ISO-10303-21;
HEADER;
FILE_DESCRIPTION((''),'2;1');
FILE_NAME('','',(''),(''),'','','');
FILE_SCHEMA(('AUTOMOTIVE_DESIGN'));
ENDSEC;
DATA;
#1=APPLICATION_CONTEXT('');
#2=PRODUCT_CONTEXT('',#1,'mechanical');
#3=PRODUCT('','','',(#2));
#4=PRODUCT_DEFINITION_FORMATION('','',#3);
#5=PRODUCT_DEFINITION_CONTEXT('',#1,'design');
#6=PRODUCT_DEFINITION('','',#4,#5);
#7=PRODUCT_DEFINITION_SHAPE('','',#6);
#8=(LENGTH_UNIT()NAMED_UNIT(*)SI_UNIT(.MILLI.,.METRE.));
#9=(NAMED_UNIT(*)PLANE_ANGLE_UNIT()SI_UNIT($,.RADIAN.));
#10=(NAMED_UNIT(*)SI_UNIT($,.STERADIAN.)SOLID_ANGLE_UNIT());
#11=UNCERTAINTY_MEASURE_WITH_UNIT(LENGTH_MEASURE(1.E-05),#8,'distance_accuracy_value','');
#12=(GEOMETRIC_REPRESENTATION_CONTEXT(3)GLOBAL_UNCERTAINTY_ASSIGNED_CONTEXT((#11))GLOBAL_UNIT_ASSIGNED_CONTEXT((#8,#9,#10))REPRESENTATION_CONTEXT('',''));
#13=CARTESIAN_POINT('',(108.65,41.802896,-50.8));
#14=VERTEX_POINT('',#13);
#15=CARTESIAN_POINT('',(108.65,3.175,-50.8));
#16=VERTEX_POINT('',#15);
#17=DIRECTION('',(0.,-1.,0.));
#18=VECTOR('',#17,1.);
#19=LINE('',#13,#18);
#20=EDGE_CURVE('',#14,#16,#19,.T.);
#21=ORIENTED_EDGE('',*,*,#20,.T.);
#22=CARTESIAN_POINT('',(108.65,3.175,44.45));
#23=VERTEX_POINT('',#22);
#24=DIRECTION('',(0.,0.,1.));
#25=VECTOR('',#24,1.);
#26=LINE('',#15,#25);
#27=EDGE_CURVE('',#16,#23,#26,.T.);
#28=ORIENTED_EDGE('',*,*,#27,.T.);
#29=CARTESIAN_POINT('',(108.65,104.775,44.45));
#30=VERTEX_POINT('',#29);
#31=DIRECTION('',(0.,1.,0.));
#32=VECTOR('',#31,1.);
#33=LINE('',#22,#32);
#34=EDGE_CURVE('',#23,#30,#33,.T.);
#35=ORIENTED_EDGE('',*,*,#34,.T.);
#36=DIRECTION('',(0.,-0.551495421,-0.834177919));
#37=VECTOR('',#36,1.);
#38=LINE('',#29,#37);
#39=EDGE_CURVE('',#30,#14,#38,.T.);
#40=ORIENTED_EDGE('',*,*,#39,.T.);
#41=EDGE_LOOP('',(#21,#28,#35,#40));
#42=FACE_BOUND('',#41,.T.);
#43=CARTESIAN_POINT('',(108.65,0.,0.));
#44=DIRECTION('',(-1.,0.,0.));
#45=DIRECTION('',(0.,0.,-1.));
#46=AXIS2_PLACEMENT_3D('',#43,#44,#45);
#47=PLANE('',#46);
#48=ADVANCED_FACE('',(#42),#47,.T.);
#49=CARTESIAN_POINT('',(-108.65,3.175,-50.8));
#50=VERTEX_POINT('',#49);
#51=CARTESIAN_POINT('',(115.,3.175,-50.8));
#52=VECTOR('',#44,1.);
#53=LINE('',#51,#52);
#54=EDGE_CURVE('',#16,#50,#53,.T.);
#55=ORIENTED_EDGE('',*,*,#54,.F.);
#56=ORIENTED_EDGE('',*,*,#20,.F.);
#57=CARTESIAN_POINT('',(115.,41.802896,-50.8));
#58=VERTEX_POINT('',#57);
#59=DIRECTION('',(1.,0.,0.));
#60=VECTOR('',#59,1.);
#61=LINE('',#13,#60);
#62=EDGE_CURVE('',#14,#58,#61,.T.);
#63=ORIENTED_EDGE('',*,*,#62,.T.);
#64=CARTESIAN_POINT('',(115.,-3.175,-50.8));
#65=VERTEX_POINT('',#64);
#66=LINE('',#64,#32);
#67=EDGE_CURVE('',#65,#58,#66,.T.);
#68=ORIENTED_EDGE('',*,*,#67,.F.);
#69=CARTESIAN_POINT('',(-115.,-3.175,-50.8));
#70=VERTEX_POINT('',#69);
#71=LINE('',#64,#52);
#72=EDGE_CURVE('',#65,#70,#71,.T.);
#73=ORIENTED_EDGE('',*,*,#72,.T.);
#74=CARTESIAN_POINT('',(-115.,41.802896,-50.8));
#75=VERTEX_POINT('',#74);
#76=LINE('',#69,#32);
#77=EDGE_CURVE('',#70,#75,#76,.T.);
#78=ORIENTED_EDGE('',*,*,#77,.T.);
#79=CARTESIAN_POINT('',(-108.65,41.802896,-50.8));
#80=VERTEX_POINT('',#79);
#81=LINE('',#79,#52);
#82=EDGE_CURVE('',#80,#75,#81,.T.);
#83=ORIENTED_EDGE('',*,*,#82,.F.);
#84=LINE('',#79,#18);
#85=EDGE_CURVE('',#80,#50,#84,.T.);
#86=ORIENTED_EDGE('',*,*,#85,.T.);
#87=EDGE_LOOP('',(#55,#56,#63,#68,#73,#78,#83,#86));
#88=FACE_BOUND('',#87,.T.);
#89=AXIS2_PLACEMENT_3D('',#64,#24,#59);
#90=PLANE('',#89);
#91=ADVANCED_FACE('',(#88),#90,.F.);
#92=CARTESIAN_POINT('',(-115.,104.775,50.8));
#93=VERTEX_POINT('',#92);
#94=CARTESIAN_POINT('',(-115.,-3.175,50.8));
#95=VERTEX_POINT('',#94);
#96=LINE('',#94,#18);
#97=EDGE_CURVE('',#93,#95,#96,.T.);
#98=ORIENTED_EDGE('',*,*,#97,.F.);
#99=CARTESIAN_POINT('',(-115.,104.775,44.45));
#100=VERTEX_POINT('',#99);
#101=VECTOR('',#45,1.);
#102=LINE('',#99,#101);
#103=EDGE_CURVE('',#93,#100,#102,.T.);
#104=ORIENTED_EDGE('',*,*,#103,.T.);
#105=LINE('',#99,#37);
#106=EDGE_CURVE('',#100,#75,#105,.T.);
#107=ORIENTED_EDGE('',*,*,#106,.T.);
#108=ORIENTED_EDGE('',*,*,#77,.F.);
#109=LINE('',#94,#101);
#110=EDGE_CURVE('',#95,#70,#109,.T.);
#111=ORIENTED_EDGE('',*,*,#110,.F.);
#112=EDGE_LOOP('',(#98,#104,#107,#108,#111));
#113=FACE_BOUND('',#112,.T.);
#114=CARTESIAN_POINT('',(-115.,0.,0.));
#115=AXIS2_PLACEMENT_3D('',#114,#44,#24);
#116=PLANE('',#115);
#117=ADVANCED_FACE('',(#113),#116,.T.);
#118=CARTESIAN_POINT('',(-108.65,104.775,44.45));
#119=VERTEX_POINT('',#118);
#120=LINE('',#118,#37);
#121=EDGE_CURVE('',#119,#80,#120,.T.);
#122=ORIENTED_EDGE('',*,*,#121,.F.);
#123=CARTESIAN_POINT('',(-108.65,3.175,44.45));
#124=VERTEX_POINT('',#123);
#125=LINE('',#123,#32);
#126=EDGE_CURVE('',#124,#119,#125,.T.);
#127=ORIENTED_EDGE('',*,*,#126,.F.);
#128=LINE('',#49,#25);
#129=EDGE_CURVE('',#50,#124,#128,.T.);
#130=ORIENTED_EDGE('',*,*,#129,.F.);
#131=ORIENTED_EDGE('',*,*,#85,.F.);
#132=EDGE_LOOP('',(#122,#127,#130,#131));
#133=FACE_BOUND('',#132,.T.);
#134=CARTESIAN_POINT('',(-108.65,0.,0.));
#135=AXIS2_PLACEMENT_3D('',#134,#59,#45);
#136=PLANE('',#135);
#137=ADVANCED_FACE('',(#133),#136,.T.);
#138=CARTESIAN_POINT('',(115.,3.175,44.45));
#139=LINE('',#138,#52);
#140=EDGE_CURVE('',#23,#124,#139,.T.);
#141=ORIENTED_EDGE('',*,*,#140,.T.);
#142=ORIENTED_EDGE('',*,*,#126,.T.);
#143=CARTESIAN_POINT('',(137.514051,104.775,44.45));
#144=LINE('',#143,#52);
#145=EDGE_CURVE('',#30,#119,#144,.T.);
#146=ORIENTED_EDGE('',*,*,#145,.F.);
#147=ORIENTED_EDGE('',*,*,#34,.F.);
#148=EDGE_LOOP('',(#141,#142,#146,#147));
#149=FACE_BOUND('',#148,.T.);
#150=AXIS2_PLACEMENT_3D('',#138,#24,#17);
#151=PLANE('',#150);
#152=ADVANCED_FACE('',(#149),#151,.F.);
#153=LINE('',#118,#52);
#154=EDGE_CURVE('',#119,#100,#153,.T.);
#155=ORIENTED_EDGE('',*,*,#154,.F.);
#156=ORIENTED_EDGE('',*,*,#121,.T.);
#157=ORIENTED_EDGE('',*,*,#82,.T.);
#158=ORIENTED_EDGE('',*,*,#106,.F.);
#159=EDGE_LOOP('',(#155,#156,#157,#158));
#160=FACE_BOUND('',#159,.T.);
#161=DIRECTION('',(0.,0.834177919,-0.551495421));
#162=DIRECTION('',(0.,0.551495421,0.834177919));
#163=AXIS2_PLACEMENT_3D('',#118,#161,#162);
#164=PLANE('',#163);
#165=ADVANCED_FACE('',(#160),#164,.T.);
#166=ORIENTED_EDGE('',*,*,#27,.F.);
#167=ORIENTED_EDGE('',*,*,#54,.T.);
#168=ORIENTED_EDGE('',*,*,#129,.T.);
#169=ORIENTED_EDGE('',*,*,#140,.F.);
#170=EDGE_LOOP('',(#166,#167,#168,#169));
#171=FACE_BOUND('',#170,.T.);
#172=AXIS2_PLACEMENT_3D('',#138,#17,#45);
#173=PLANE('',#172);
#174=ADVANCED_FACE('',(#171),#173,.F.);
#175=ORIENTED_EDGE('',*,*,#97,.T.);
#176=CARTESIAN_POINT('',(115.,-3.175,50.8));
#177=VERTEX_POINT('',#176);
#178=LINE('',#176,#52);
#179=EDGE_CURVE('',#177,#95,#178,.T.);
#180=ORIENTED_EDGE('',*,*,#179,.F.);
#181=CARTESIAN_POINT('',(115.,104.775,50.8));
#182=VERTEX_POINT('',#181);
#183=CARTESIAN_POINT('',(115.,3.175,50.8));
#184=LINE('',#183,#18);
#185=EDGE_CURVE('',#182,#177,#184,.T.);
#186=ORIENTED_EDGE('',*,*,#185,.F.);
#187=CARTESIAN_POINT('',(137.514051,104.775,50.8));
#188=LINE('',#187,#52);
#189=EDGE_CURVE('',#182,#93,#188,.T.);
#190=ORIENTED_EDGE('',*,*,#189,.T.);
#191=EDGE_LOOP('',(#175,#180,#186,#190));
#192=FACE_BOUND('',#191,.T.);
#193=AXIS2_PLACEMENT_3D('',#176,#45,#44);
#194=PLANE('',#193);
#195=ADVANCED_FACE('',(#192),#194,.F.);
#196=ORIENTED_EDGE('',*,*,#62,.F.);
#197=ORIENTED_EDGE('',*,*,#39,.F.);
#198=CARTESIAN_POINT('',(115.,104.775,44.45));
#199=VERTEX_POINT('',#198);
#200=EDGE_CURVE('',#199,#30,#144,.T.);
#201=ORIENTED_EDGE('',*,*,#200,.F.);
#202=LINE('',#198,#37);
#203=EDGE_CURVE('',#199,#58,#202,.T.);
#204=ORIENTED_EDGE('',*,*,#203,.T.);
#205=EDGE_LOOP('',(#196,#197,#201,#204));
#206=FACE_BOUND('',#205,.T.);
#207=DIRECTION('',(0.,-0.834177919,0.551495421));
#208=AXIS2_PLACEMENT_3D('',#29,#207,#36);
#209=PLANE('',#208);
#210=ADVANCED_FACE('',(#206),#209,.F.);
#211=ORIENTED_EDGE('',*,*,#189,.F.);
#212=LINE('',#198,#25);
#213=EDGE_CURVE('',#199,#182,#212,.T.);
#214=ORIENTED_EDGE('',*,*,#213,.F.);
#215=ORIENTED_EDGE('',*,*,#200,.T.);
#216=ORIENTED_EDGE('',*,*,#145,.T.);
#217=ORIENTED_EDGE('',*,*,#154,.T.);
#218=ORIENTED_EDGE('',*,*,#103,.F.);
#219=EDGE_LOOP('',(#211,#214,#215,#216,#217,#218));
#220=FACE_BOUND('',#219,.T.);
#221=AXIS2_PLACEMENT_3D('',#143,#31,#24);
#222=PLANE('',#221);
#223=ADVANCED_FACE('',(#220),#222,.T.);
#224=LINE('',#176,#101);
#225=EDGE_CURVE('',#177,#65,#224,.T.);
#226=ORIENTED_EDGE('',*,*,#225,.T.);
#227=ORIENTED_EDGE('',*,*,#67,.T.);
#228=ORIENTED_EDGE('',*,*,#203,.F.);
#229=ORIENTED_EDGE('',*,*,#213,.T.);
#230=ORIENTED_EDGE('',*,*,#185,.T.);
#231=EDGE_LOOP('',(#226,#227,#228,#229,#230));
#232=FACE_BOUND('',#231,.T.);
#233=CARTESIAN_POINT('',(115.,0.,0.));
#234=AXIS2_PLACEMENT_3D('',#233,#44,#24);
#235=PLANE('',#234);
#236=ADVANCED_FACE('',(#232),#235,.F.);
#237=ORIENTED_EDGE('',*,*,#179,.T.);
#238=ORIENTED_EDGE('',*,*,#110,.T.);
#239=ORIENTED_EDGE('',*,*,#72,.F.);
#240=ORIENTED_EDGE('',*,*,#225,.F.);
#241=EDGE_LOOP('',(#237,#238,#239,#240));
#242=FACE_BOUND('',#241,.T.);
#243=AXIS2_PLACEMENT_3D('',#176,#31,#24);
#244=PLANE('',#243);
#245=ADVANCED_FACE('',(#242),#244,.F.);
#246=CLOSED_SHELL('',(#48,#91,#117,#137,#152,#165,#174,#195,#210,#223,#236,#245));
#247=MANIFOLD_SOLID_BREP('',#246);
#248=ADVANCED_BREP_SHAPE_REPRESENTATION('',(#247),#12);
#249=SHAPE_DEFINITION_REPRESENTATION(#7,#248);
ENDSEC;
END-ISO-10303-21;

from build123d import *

# Parameters (mm, degrees)
BOSS_EXTRUDE1_DEPTH     = 115
SKETCH2_R               = 2.5
CUT_EXTRUDE1_DEPTH      = 171.92584101
CUT_EXTRUDE2_DEPTH      = 150.015569656
CUT_EXTRUDE2_DEPTH_BACK = 150.015569656
SKETCH4_R               = 3.3
SPLIT1_SURFACE_1_BACK   = 266.855
SPLIT1_SURFACE_1_DEPTH  = 533.71
SPLIT1_SURFACE_2_BACK   = 266.855
SPLIT1_SURFACE_2_DEPTH  = 533.71
SKETCH6_W               = 6.35
SKETCH6_H               = 21.6
BOSS_EXTRUDE2_DEPTH     = 230
DELETEFACE1_START       = -3.175
DELETEFACE1_OUTLINE_R   = 3.3
DELETEFACE1_DEPTH       = 6.35
DELETEFACE1_START_2     = 44.45
DELETEFACE1_2_OUTLINE_R = 2.5
DELETEFACE1_2_DEPTH     = 6.35
BOSS_EXTRUDE3_DEPTH     = 6.35


# Read off the part's stored shape, not the designer's step: DeleteFace1
with BuildPart() as part:
    # Sketch1 → Boss-Extrude1 (new, symmetric)
    with BuildSketch(Plane(origin=(0, 0, 0), x_dir=(0, 0, -1), z_dir=(1, 0, 0))):
        Polygon((-50.8, -3.175), (50.8, -3.175), (50.8, 3.175), (-44.45, 3.175), (-44.45, 83.175), (-50.8, 83.175), (-50.8, 3.175), align=None)
    extrude(amount=BOSS_EXTRUDE1_DEPTH, both=True)

    # Sketch2 → Cut-Extrude1 (cut, through all)
    with BuildSketch(Plane(origin=(0, 0, 44.45), x_dir=(-1, 0, 0), z_dir=(0, 0, -1))):
        with Locations(Location((-32.5, 73.491666667, 0), (0, 0, 90))):
            Circle(SKETCH2_R)
        with Locations(Location((-32.5, 11.825, 0), (0, 0, 90))):
            Circle(SKETCH2_R)
        with Locations(Location((32.5, 11.825, 0), (0, 0, 90))):
            Circle(SKETCH2_R)
        with Locations(Location((32.5, 73.491666667, 0), (0, 0, 90))):
            Circle(SKETCH2_R)
        with Locations(Location((-102.75, 73.491666667, 0), (0, 0, 90))):
            Circle(SKETCH2_R)
        with Locations(Location((-102.75, 11.825, 0), (0, 0, 90))):
            Circle(SKETCH2_R)
        with Locations(Location((102.75, 73.491666667, 0), (0, 0, 90))):
            Circle(SKETCH2_R)
        with Locations(Location((102.75, 11.825, 0), (0, 0, 90))):
            Circle(SKETCH2_R)
    extrude(amount=-CUT_EXTRUDE1_DEPTH, mode=Mode.SUBTRACT)

    # Sketch4 → Cut-Extrude2 (cut, two sides: drawn at the far end of the back side and taken through both)
    with BuildSketch(Plane(origin=(0, 3.175, 0), x_dir=(1, 0, 0), z_dir=(0, 1, 0)).offset(-CUT_EXTRUDE2_DEPTH_BACK)):
        with Locations(Location((56.37, 25.8, 0), (0, 0, 270))):
            Circle(SKETCH4_R)
        with Locations(Location((96.37, 25.8, 0), (0, 0, 270))):
            Circle(SKETCH4_R)
        with Locations(Location((96.37, -27.2, 0), (0, 0, 270))):
            Circle(SKETCH4_R)
        with Locations(Location((56.37, -27.2, 0), (0, 0, 270))):
            Circle(SKETCH4_R)
        with Locations(Location((-96.37, 25.8, 0), (0, 0, 90))):
            Circle(SKETCH4_R)
        with Locations(Location((-96.37, -27.2, 0), (0, 0, 90))):
            Circle(SKETCH4_R)
        with Locations(Location((-56.37, -27.2, 0), (0, 0, 90))):
            Circle(SKETCH4_R)
        with Locations(Location((-56.37, 25.8, 0), (0, 0, 90))):
            Circle(SKETCH4_R)
    extrude(amount=CUT_EXTRUDE2_DEPTH + CUT_EXTRUDE2_DEPTH_BACK, mode=Mode.SUBTRACT)


with BuildPart() as body_2:
    # Split1: the piece behind the surface
    add(part.part)
    # Split1 surface: a surface, the sketch's curves swept straight by 533.71 mm
    with BuildLine(Plane.ZY.offset(115).offset(-SPLIT1_SURFACE_1_BACK), mode=Mode.PRIVATE) as split1_surface_1_path:
        Line((44.45, 3.175), (50.8, 3.175))
    split1_surface_1 = Shell.extrude(split1_surface_1_path.wire(), (-1 * SPLIT1_SURFACE_1_DEPTH, 0 * SPLIT1_SURFACE_1_DEPTH, 0 * SPLIT1_SURFACE_1_DEPTH))
    split(bisect_by=split1_surface_1, keep=Keep.BOTTOM)


with BuildPart() as part_1:
    add(part.part)

    # Split1: split by a surface, the side it looks to stays
    # Split1 surface: a surface, the sketch's curves swept straight by 533.71 mm
    with BuildLine(Plane.ZY.offset(115).offset(-SPLIT1_SURFACE_2_BACK), mode=Mode.PRIVATE) as split1_surface_2_path:
        Line((44.45, 3.175), (50.8, 3.175))
    split1_surface_2 = Shell.extrude(split1_surface_2_path.wire(), (-1 * SPLIT1_SURFACE_2_DEPTH, 0 * SPLIT1_SURFACE_2_DEPTH, 0 * SPLIT1_SURFACE_2_DEPTH))
    split(bisect_by=split1_surface_2, keep=Keep.TOP)

    # Sketch6 → Boss-Extrude2 (add)
    with BuildSketch(Plane.ZY.offset(115)):
        with Locations((47.625, 93.975)):
            Rectangle(SKETCH6_W, SKETCH6_H)
    extrude(amount=-BOSS_EXTRUDE2_DEPTH)


with BuildPart() as body_2_1:
    add(body_2.part)

    # Combine1: union part
    add(part_1.part)

    # DeleteFace1 outline → DeleteFace1 (add)
    with BuildSketch(Plane(origin=(0, 0, 0), x_dir=(1, 0, 0), z_dir=(0, 1, 0)).offset(DELETEFACE1_START)):
        with Locations((56.37, 25.8)):
            Circle(DELETEFACE1_OUTLINE_R)
        with Locations((-56.37, 25.8)):
            Circle(DELETEFACE1_OUTLINE_R)
        with Locations((-56.37, -27.2)):
            Circle(DELETEFACE1_OUTLINE_R)
        with Locations((-96.37, -27.2)):
            Circle(DELETEFACE1_OUTLINE_R)
        with Locations((-96.37, 25.8)):
            Circle(DELETEFACE1_OUTLINE_R)
        with Locations((56.37, -27.2)):
            Circle(DELETEFACE1_OUTLINE_R)
        with Locations((96.37, -27.2)):
            Circle(DELETEFACE1_OUTLINE_R)
        with Locations((96.37, 25.8)):
            Circle(DELETEFACE1_OUTLINE_R)
    extrude(amount=DELETEFACE1_DEPTH)

    # DeleteFace1 2 outline → DeleteFace1 2 (add)
    with BuildSketch(Plane.XY.offset(DELETEFACE1_START_2)):
        with Locations((32.5, 11.825)):
            Circle(DELETEFACE1_2_OUTLINE_R)
        with Locations((-32.5, 11.825)):
            Circle(DELETEFACE1_2_OUTLINE_R)
        with Locations((-32.5, 73.491666667)):
            Circle(DELETEFACE1_2_OUTLINE_R)
        with Locations((102.75, 73.491666667)):
            Circle(DELETEFACE1_2_OUTLINE_R)
        with Locations((-102.75, 11.825)):
            Circle(DELETEFACE1_2_OUTLINE_R)
        with Locations((-102.75, 73.491666667)):
            Circle(DELETEFACE1_2_OUTLINE_R)
        with Locations((102.75, 11.825)):
            Circle(DELETEFACE1_2_OUTLINE_R)
        with Locations((32.5, 73.491666667)):
            Circle(DELETEFACE1_2_OUTLINE_R)
    extrude(amount=DELETEFACE1_2_DEPTH)

    # Sketch10 → Boss-Extrude3 (add)
    with BuildSketch(Plane.ZY.offset(115)):
        Polygon((44.45, 104.775), (-50.8, 41.802895791), (-50.8, 3.175), (44.45, 3.175), align=None)
    boss_extrude3 = extrude(amount=-BOSS_EXTRUDE3_DEPTH)

    # Mirror1: Boss-Extrude3 across plane
    add(boss_extrude3.mirror(Plane(origin=(0, 0, 0), x_dir=(0, 0, 1), z_dir=(1, 0, 0))))


solid = body_2_1.part
